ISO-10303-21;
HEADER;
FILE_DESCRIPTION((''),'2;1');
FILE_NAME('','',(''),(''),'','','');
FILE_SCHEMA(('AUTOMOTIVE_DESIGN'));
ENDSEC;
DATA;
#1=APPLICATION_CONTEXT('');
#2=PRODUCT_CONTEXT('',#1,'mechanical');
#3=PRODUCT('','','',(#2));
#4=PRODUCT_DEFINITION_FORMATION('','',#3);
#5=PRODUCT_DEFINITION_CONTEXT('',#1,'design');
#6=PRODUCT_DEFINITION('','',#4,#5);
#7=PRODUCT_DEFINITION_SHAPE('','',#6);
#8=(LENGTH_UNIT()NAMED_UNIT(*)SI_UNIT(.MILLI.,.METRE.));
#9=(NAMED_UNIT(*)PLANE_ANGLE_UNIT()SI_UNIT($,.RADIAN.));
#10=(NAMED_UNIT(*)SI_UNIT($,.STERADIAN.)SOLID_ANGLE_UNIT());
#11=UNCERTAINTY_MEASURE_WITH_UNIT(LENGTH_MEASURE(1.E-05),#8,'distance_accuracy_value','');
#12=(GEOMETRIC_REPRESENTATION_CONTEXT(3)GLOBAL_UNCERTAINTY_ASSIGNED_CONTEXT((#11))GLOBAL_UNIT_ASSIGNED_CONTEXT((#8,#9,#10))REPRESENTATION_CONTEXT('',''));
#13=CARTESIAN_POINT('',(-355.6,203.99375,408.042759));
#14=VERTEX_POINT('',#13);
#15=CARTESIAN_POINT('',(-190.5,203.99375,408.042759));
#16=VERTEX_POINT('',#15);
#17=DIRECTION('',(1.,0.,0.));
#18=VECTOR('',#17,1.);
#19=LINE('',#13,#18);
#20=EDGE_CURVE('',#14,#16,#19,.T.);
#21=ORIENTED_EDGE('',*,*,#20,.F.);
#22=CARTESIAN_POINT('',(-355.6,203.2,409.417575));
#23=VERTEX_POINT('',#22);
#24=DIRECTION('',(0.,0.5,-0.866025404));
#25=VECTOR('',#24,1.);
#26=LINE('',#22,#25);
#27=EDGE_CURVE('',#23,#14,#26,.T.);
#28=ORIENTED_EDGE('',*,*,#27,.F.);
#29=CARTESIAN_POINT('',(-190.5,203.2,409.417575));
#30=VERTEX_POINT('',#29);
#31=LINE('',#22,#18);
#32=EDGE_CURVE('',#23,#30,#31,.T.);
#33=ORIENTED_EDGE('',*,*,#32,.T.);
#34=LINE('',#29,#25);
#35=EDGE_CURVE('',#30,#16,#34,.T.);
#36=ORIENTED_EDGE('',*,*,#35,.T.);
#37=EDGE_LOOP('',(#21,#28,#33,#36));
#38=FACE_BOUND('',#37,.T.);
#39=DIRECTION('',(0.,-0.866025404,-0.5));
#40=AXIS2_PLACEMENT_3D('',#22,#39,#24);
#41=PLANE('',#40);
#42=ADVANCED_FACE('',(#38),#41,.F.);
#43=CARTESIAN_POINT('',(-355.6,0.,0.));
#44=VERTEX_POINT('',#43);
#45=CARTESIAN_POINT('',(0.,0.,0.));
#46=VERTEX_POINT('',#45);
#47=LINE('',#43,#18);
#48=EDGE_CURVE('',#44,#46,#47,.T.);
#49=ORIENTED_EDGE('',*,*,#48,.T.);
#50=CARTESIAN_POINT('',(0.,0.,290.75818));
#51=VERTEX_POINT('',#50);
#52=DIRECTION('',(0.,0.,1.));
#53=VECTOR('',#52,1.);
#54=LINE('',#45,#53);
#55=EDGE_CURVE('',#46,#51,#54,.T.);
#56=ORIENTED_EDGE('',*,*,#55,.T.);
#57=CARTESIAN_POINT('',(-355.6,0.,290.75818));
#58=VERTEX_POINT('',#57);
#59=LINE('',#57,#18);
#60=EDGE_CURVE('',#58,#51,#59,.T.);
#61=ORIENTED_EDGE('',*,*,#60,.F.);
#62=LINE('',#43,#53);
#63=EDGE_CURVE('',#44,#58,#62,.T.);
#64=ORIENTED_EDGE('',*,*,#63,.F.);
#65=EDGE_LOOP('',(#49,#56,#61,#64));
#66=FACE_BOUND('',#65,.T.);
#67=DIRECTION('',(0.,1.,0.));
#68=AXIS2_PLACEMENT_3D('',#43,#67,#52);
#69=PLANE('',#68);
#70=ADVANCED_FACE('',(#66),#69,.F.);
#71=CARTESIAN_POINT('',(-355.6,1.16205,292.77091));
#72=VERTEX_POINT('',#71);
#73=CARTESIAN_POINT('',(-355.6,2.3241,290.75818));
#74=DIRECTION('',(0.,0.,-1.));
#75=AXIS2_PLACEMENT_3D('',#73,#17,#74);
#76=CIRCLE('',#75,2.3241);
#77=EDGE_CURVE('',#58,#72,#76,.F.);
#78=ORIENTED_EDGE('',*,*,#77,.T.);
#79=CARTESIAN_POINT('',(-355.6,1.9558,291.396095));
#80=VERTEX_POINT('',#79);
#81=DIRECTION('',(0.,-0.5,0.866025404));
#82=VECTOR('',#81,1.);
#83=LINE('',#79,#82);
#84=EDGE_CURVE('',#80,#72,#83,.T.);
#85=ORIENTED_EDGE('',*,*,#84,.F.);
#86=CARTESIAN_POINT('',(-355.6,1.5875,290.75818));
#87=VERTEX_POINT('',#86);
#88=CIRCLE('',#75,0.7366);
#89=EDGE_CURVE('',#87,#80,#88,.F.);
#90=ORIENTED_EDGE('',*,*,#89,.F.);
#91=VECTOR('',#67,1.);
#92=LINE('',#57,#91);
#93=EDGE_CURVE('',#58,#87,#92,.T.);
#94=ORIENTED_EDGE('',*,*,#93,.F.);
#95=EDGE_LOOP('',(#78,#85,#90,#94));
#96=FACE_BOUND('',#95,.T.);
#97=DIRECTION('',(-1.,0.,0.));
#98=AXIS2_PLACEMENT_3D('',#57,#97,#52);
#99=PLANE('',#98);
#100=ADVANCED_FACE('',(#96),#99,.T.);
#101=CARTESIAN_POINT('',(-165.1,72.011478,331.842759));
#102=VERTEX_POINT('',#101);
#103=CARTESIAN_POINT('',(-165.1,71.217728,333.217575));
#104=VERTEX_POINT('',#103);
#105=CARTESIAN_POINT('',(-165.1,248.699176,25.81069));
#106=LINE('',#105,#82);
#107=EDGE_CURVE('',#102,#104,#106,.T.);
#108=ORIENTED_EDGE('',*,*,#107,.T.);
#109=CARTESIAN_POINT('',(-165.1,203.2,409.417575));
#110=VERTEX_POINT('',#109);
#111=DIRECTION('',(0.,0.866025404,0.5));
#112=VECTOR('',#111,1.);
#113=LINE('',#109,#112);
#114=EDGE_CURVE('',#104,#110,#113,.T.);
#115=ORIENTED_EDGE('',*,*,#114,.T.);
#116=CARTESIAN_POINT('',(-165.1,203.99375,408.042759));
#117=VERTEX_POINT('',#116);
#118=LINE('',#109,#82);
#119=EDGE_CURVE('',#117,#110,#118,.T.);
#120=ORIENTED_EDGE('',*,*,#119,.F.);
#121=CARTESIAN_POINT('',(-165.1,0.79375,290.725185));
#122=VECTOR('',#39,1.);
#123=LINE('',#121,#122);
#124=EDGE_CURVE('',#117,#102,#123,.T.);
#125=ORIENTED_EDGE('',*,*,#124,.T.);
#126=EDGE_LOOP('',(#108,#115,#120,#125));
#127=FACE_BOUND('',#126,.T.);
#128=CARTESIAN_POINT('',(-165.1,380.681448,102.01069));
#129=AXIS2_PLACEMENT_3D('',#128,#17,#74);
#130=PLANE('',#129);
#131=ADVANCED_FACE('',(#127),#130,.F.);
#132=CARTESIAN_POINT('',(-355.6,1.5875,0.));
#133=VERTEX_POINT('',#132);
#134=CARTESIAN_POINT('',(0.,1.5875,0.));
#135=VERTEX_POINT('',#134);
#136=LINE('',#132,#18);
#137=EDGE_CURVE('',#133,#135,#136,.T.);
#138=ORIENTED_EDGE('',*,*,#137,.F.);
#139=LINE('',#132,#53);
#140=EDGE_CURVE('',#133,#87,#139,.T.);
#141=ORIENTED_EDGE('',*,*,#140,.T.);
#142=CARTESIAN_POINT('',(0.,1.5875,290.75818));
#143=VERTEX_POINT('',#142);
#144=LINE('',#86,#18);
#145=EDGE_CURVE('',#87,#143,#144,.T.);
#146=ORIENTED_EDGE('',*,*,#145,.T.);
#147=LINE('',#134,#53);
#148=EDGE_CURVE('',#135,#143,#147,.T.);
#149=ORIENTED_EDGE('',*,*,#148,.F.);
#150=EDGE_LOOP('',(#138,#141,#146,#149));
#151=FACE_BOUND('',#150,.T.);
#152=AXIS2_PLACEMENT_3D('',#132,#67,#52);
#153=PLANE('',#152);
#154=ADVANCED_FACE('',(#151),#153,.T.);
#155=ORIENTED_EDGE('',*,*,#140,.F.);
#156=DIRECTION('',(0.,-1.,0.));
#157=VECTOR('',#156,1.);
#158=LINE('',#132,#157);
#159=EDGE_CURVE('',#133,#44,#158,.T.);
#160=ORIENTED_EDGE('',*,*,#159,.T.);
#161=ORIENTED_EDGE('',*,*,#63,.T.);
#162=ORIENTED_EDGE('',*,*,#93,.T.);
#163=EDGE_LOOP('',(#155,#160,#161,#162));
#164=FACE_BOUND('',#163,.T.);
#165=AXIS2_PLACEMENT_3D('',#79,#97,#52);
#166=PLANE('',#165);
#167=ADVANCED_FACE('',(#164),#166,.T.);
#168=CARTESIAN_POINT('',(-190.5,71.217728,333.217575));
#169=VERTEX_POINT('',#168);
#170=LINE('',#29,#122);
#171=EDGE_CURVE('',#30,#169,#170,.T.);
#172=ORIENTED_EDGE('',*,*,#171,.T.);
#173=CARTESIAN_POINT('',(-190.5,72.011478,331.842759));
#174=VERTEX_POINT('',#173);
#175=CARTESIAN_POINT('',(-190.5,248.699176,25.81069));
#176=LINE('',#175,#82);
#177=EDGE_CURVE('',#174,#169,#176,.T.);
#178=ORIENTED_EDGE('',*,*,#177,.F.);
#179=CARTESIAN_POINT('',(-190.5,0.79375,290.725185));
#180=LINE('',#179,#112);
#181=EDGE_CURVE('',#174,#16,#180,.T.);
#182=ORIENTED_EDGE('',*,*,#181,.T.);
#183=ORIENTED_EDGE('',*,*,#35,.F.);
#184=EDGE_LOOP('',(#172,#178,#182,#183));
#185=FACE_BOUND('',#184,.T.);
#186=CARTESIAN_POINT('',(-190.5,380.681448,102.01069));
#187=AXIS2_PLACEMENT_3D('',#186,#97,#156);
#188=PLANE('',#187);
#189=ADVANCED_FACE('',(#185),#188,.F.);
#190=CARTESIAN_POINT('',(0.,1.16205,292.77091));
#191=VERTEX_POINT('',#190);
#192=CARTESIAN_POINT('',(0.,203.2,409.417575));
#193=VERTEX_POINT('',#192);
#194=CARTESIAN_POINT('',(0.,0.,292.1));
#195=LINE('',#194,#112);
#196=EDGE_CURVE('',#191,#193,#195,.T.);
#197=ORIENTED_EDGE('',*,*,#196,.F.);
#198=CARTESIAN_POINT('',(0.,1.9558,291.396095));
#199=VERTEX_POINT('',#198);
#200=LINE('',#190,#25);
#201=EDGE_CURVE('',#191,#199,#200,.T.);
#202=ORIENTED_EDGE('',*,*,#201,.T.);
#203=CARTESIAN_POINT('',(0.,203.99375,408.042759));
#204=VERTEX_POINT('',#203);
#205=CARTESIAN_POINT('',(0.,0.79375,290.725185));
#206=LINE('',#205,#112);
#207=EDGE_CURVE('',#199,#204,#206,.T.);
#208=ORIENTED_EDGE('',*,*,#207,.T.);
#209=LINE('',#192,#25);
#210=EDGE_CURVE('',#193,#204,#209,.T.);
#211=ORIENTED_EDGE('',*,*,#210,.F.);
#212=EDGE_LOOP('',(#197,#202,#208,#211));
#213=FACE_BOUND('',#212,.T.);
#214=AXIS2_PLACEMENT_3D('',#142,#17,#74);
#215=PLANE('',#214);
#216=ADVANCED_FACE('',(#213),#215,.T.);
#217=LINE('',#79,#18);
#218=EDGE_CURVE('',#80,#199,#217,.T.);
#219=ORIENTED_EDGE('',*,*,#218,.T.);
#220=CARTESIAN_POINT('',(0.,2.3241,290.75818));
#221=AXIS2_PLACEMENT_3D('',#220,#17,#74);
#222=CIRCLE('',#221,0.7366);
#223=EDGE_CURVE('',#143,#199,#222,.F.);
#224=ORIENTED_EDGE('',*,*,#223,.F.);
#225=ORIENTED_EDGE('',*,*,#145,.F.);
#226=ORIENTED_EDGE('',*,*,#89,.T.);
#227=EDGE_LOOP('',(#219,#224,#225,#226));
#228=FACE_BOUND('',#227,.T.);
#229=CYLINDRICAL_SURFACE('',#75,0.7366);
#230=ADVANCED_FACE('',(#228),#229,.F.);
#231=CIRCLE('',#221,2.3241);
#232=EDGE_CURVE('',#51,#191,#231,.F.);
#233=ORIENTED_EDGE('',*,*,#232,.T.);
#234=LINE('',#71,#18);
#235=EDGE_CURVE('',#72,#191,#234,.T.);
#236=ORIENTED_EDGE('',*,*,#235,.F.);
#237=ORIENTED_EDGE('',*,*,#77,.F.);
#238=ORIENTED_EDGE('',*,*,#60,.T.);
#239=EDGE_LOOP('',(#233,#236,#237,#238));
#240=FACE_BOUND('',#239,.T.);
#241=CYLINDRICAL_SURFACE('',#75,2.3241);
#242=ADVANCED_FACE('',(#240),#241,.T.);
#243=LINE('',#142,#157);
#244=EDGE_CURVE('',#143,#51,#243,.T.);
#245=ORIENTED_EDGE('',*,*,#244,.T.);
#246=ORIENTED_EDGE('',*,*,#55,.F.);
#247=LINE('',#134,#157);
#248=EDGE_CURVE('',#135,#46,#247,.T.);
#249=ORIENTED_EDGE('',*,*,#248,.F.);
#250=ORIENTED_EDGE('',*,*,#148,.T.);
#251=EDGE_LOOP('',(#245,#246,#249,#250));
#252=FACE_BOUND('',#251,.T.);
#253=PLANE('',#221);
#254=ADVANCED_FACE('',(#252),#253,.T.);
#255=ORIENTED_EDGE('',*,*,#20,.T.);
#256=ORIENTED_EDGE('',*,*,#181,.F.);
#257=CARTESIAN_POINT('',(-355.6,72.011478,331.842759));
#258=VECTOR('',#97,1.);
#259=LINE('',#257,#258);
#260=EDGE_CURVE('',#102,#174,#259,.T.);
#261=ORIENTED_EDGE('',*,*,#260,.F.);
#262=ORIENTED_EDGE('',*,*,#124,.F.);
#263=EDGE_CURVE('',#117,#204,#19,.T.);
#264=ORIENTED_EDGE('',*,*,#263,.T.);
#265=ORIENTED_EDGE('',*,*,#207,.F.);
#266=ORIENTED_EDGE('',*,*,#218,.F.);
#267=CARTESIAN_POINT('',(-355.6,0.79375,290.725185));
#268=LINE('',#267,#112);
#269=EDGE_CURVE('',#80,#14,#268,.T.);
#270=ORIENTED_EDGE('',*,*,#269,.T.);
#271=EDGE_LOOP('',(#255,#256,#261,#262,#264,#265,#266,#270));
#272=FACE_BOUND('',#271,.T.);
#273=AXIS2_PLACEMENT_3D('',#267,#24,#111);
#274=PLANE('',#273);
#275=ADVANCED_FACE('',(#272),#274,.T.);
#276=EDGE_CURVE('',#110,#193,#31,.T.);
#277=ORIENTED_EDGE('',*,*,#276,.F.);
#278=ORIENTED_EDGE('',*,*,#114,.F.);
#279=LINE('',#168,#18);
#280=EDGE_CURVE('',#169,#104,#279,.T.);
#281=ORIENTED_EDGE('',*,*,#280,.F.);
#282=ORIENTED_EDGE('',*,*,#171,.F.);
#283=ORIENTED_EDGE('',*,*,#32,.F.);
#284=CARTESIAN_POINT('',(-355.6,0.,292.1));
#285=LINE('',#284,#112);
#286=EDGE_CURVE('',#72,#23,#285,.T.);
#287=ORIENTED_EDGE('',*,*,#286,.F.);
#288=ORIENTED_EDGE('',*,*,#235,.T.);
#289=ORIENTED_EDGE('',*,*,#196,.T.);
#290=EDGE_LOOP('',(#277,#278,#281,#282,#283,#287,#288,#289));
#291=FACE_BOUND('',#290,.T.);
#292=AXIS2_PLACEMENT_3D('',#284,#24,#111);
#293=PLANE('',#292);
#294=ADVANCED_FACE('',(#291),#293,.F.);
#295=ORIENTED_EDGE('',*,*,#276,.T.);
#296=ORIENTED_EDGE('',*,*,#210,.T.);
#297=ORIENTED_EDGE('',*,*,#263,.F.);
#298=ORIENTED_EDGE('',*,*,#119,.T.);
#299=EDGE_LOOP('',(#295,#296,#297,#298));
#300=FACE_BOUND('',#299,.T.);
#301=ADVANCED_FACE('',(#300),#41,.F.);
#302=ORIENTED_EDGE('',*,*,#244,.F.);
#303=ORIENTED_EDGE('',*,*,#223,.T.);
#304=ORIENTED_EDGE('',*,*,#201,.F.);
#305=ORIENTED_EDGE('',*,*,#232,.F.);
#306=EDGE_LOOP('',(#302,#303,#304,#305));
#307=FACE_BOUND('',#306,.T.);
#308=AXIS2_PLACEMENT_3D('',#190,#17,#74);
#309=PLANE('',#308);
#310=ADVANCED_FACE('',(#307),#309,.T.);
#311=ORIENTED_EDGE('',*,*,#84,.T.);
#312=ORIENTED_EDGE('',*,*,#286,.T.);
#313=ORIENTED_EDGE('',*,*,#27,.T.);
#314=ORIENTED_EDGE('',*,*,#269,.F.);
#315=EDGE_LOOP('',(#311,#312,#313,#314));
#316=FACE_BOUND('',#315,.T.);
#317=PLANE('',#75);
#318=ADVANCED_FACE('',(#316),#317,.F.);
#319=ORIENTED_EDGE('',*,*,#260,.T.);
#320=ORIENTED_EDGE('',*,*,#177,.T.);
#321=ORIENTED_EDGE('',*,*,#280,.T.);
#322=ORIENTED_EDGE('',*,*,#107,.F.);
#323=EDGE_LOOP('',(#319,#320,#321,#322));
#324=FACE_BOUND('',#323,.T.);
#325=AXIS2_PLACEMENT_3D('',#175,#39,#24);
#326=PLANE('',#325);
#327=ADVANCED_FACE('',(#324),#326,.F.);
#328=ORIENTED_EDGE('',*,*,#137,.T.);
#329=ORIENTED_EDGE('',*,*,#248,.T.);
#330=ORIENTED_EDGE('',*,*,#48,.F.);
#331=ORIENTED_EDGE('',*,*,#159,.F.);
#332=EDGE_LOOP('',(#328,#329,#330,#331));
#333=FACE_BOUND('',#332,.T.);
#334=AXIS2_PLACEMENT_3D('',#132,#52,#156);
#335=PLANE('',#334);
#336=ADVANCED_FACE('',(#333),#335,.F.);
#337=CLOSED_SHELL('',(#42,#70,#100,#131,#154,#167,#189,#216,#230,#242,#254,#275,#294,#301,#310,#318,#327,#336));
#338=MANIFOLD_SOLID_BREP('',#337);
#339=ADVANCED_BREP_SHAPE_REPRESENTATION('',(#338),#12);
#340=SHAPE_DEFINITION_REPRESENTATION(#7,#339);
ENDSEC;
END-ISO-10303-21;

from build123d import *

# Parameters (mm, degrees)
BASE_FLANGE1_DEPTH = 355.6
SKETCH6_W          = 25.4
SKETCH6_H          = 152.4
CUT_EXTRUDE1_DEPTH = 533.597507197


# Sheet-metal steps are written as plain solids
with BuildPart() as part:
    # Sketch1 → Base-Flange1 (new body)
    with BuildSketch(Plane(origin=(0, 0, 0), x_dir=(0, 0, -1), z_dir=(1, 0, 0))):
        with BuildLine():
            Line((0, 0), (-290.758180239, 0))
            ThreePointArc((-290.758180239, 0), (-291.920230239, 0.311370359), (-292.77090988, 1.16205))
            Line((-292.77090988, 1.16205), (-409.417574699, 203.2))
            Line((-409.417574699, 203.2), (-408.042759371, 203.99375))
            Line((-408.042759371, 203.99375), (-291.396094552, 1.9558))
            ThreePointArc((-291.396094552, 1.9558), (-291.126480239, 1.686185688), (-290.758180239, 1.5875))
            Line((-290.758180239, 1.5875), (0, 1.5875))
            Line((0, 1.5875), (0, 0))
        make_face()
    extrude(amount=-BASE_FLANGE1_DEPTH)

    # Sketch6 → Cut-Extrude1 (cut, through all)
    with BuildSketch(Plane(origin=(0, -126.483010223, 219.075), x_dir=(1, 0, 0), z_dir=(0, -0.4999999999999979, 0.8660254037844399))):
        with Locations((-177.8, 304.485149399)):
            Rectangle(SKETCH6_W, SKETCH6_H)
    extrude(amount=-CUT_EXTRUDE1_DEPTH, mode=Mode.SUBTRACT)


solid = part.part
